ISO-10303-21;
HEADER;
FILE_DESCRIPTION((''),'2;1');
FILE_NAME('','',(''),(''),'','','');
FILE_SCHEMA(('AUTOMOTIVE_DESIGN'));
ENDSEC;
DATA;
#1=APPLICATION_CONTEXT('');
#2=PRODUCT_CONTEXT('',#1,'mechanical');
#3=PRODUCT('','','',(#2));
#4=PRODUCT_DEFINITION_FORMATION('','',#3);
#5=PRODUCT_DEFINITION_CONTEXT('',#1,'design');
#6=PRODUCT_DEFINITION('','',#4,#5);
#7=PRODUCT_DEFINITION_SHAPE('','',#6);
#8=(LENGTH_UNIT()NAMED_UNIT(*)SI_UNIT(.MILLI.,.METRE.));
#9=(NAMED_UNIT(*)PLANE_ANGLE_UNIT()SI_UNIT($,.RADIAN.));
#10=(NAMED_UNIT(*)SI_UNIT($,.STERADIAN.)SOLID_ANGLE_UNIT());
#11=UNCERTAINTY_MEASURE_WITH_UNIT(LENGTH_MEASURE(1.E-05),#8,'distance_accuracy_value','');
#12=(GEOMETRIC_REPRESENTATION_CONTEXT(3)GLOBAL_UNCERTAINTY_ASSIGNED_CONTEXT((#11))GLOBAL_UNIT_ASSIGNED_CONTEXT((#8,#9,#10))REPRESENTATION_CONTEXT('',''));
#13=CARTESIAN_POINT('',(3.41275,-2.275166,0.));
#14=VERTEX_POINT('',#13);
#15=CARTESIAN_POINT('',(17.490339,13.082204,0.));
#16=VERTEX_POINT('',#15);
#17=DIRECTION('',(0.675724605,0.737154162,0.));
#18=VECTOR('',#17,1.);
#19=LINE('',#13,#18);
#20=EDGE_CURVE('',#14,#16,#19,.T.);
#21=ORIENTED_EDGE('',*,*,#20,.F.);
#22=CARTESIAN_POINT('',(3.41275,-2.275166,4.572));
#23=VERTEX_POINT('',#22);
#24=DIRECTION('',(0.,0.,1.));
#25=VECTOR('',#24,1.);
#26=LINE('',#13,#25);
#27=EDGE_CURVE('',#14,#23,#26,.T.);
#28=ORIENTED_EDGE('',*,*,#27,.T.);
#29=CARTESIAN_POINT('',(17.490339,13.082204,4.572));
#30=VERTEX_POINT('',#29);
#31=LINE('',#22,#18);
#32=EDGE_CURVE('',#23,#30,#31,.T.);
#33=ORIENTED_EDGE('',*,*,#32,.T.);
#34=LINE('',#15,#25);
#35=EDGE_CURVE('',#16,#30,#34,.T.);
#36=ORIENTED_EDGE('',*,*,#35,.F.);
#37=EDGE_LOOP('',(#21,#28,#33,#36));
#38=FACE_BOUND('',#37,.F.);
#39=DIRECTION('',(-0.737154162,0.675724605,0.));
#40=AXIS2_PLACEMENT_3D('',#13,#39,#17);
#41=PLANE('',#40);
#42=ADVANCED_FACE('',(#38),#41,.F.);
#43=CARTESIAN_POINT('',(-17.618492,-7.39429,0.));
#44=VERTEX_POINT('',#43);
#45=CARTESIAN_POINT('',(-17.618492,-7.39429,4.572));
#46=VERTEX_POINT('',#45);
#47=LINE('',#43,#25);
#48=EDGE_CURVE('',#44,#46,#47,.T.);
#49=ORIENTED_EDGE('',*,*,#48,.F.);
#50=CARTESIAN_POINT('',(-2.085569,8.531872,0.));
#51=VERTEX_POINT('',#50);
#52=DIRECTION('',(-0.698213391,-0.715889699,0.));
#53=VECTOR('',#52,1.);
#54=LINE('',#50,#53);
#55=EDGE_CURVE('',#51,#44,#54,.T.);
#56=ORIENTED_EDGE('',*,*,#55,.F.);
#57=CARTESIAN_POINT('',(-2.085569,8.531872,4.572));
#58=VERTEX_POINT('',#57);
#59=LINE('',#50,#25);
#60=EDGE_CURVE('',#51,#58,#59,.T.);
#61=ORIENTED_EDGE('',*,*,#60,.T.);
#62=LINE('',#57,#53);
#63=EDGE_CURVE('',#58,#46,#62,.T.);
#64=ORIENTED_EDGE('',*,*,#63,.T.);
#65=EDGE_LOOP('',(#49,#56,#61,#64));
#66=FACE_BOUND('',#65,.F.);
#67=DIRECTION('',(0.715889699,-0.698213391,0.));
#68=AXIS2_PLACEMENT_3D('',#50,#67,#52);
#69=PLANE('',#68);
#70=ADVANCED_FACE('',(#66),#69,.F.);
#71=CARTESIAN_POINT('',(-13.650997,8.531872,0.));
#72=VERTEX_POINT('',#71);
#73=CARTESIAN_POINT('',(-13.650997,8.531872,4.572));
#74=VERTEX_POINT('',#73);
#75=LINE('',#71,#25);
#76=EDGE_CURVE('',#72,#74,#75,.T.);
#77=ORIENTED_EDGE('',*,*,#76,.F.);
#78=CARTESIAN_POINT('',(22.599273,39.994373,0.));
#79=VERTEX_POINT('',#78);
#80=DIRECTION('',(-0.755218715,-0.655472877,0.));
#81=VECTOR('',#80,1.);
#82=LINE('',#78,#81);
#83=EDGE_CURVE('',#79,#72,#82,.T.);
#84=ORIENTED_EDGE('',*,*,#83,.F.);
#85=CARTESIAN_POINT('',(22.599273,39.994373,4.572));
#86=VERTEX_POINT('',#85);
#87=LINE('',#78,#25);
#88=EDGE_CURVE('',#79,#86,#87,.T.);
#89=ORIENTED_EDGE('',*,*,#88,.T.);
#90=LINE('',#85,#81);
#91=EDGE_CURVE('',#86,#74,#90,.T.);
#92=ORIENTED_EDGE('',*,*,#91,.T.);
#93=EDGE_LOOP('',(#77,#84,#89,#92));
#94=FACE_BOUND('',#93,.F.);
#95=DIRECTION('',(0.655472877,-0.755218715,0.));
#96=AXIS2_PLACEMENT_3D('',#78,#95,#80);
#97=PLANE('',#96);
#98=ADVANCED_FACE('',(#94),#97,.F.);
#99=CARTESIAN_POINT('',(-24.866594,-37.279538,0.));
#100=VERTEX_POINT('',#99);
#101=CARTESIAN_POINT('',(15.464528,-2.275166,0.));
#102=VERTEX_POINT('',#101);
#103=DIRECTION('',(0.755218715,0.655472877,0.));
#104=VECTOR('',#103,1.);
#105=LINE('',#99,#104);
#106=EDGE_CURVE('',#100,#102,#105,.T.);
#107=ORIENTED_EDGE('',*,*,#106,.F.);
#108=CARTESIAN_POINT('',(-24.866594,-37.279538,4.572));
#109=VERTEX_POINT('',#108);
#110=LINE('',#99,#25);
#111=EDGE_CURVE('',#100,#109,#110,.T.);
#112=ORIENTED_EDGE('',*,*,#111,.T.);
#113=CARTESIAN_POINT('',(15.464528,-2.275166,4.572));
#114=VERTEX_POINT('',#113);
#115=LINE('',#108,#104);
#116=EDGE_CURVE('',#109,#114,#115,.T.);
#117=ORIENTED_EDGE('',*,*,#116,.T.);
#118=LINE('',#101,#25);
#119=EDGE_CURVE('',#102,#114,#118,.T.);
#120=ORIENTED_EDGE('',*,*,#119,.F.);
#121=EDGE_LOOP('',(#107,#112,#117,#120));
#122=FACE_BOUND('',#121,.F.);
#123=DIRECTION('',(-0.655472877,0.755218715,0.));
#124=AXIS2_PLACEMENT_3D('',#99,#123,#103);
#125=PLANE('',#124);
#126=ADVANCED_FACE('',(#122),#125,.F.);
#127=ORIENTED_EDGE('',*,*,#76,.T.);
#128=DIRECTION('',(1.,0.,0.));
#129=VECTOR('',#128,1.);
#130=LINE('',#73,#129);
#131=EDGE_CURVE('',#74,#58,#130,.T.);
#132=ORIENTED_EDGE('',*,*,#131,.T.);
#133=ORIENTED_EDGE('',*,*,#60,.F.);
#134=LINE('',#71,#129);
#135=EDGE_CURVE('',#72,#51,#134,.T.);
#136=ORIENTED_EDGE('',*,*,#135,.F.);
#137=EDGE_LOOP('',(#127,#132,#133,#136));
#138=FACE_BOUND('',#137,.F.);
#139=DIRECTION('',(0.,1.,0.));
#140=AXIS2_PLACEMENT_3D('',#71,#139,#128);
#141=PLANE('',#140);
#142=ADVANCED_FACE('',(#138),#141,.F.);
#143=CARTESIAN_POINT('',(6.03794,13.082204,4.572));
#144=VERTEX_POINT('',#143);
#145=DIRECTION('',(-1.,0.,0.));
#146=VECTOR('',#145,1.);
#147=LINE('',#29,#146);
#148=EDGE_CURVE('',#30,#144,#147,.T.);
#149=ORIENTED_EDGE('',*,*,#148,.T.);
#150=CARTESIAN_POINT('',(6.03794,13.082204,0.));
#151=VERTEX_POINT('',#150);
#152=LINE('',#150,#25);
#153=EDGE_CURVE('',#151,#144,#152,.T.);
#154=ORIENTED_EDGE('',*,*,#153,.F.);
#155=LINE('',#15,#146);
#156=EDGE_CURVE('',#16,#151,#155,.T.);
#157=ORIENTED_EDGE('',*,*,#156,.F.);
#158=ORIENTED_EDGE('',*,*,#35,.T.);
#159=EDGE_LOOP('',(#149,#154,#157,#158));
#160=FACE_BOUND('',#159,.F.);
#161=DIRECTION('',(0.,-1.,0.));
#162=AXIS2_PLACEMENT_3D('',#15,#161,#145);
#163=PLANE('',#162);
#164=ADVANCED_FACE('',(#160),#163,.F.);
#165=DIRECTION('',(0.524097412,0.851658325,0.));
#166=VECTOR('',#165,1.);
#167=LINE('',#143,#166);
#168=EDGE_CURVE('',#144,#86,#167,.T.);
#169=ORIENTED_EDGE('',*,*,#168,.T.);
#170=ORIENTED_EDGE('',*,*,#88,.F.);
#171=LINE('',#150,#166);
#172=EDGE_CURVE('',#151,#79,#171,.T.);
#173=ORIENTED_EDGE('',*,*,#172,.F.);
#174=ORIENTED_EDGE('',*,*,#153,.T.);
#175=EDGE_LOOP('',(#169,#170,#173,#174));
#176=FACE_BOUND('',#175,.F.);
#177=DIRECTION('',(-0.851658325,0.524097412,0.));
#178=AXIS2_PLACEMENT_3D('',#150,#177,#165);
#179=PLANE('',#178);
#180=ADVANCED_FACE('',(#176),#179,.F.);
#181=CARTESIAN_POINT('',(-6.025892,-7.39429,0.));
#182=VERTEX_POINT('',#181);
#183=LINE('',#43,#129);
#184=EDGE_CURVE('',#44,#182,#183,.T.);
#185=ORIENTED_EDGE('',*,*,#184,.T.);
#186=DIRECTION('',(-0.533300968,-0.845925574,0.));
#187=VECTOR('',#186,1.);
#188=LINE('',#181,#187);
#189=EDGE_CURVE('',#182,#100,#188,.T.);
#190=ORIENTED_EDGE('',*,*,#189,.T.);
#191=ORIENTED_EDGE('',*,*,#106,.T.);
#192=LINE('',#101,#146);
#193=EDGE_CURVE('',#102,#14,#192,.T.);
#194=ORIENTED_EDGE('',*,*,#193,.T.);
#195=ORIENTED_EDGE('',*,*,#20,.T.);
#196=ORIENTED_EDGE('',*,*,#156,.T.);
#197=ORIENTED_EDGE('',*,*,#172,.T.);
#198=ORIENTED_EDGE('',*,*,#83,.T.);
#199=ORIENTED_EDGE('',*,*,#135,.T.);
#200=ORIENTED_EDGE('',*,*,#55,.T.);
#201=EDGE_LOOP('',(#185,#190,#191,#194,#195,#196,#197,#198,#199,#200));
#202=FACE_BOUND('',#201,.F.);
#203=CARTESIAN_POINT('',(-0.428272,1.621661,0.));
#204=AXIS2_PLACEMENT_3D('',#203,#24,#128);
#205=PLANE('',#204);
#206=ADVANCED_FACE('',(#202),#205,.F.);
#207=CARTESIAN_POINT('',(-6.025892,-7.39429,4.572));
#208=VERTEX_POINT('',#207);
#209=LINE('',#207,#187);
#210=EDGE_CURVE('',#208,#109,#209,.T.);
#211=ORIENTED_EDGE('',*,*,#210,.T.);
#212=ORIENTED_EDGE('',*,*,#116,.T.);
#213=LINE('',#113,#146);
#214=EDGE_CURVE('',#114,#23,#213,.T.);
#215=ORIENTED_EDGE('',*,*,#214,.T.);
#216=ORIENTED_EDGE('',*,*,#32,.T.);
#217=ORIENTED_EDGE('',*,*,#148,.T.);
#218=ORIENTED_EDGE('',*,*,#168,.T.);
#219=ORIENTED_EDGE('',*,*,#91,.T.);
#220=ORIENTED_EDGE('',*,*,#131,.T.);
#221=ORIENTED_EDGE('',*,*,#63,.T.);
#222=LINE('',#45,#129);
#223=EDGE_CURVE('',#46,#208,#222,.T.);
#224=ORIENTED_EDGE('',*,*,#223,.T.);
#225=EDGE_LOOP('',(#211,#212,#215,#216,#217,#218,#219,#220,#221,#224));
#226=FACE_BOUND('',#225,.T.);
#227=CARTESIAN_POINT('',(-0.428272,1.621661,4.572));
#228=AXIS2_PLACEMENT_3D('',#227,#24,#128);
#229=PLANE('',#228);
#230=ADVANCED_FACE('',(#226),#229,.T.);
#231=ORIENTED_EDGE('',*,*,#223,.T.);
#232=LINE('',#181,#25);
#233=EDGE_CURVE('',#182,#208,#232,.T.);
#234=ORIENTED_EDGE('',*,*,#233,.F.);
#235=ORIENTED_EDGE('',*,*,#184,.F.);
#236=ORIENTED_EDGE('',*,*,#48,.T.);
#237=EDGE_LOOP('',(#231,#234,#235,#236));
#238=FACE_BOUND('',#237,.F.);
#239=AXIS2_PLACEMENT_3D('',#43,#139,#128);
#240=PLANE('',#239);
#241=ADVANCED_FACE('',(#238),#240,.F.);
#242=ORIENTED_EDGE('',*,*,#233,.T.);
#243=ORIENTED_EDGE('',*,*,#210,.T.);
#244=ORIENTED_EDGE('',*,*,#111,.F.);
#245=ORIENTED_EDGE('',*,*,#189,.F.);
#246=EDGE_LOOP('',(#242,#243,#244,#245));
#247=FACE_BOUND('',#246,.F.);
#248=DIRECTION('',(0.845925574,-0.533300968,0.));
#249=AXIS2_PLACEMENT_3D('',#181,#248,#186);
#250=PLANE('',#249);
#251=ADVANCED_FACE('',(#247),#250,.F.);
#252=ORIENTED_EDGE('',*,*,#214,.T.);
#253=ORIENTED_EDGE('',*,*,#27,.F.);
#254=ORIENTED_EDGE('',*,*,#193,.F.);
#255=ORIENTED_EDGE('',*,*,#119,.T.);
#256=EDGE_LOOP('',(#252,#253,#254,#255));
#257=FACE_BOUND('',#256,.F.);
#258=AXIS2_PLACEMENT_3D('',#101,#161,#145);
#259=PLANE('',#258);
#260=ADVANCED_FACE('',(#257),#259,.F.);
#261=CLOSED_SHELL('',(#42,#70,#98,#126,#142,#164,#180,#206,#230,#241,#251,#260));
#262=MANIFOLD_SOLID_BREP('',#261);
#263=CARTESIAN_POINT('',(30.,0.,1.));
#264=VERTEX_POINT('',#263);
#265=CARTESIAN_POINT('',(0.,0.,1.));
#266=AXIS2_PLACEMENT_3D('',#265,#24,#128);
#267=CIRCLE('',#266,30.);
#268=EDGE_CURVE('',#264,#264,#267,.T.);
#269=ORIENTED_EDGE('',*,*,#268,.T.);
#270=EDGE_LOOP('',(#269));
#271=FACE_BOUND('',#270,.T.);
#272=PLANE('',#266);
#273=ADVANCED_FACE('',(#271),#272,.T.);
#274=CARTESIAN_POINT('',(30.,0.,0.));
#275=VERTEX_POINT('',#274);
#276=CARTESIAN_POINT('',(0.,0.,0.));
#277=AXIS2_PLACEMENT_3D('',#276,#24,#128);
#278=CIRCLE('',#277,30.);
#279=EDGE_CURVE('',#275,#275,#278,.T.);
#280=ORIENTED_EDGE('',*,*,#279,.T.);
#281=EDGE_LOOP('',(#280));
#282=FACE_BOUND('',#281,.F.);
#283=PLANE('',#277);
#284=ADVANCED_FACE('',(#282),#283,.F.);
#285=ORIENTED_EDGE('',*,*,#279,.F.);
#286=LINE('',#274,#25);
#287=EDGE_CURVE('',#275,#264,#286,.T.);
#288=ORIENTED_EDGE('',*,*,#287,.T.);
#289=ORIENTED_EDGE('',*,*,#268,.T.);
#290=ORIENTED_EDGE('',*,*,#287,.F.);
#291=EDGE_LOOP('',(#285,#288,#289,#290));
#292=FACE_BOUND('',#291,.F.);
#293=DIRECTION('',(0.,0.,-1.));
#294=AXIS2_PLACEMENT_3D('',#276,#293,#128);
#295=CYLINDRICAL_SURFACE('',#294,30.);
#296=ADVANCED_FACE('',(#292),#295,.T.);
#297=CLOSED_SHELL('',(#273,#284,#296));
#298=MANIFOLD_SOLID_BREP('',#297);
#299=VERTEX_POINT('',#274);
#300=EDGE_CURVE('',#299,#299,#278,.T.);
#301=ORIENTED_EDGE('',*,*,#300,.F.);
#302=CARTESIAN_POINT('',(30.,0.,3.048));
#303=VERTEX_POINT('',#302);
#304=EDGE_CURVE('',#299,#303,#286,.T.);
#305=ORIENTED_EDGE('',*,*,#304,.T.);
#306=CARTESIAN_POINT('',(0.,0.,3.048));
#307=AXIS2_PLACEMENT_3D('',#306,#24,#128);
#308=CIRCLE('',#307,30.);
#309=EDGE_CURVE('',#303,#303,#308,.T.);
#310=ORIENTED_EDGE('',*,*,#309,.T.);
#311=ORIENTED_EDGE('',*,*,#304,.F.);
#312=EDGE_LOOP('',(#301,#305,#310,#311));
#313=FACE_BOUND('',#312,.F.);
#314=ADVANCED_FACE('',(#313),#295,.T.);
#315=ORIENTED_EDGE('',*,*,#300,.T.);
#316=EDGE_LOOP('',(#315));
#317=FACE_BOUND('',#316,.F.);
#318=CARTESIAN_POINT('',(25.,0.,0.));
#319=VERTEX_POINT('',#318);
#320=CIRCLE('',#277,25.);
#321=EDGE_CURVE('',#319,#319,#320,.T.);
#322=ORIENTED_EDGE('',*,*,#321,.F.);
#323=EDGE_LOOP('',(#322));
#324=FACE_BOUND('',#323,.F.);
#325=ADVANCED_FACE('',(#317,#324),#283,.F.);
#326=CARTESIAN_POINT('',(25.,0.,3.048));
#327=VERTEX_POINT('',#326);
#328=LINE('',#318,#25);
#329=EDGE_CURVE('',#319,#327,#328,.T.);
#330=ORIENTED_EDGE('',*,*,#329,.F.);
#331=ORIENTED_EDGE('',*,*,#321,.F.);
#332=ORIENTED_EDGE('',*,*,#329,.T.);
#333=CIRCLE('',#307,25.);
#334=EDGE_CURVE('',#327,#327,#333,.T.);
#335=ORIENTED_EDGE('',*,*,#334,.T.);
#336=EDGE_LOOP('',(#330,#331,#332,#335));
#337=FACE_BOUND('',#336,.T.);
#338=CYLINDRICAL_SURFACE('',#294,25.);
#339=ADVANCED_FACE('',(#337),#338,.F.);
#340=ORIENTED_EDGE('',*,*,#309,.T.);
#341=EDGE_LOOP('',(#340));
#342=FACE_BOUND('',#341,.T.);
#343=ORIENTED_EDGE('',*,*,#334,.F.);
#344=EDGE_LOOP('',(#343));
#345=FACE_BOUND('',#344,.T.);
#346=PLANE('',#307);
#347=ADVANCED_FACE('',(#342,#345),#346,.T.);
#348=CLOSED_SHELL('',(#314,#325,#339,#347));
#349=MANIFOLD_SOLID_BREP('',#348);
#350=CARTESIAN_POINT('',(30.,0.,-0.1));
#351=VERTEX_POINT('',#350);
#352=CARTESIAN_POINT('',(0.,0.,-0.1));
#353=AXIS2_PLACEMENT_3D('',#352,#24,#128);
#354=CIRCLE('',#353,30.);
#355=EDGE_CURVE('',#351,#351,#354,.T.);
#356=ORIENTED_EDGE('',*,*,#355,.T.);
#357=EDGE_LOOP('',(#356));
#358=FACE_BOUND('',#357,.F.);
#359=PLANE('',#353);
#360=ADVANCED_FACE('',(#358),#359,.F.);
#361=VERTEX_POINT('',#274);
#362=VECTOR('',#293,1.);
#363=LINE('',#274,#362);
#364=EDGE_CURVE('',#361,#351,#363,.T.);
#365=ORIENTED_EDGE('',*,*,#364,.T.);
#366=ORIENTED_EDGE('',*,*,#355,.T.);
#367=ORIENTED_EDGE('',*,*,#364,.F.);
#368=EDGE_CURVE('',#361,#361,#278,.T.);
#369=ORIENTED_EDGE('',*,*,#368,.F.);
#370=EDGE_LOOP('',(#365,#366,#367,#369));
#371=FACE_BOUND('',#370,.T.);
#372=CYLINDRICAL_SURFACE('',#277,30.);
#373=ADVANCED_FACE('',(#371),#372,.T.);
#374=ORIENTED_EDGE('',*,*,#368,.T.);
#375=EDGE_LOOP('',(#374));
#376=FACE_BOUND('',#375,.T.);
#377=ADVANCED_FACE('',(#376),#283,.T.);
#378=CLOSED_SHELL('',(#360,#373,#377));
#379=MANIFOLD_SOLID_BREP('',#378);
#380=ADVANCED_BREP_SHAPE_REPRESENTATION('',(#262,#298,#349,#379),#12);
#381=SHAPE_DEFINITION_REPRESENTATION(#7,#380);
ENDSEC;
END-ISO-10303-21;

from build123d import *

# Parameters (mm, degrees)
F1_R     = 30
F1_R_2   = 25
F5_DEPTH = 1
F6_DEPTH = 0.1
F7_DEPTH = 3.048
F8_DEPTH = 4.572


# Not quite as in the source:
# - the program builds the solid bodies; features that only make, move or delete a surface that nothing else refers to are left out


with BuildPart() as f5:
    # F1 (on face) → F5 (new body)
    with BuildSketch(Plane.XY):
        Circle(F1_R)
        Circle(F1_R_2, mode=Mode.SUBTRACT)
        Circle(F1_R_2)
    extrude(amount=F5_DEPTH)


with BuildPart() as f6:
    # F1 (on face) → F6 (new body)
    with BuildSketch(Plane.XY):
        Circle(F1_R)
        Circle(F1_R_2, mode=Mode.SUBTRACT)
        Circle(F1_R_2)
    extrude(amount=-F6_DEPTH)


with BuildPart() as f7:
    # F1 (on face) → F7 (new body)
    with BuildSketch(Plane.XY):
        Circle(F1_R)
        Circle(F1_R_2, mode=Mode.SUBTRACT)
    extrude(amount=F7_DEPTH)


with BuildPart() as f8:
    # F2 (on Top) → F8 (new body)
    with BuildSketch(Plane.XY):
        Polygon((6.0379398285, 13.0822043866), (22.5992734988, 39.9943725895), (-13.6509970043, 8.5318721831), (-2.0855690818, 8.5318721831), (-17.6184918681, -7.3942895979), (-6.025892119, -7.3942895979), (-24.8665944569, -37.2795380606), (15.4645281288, -2.2751658689), (3.412750084, -2.2751658689), (17.4903385899, 13.0822043866), align=None)
    extrude(amount=F8_DEPTH)


solid = Compound([f5.part, f6.part, f7.part, f8.part])
